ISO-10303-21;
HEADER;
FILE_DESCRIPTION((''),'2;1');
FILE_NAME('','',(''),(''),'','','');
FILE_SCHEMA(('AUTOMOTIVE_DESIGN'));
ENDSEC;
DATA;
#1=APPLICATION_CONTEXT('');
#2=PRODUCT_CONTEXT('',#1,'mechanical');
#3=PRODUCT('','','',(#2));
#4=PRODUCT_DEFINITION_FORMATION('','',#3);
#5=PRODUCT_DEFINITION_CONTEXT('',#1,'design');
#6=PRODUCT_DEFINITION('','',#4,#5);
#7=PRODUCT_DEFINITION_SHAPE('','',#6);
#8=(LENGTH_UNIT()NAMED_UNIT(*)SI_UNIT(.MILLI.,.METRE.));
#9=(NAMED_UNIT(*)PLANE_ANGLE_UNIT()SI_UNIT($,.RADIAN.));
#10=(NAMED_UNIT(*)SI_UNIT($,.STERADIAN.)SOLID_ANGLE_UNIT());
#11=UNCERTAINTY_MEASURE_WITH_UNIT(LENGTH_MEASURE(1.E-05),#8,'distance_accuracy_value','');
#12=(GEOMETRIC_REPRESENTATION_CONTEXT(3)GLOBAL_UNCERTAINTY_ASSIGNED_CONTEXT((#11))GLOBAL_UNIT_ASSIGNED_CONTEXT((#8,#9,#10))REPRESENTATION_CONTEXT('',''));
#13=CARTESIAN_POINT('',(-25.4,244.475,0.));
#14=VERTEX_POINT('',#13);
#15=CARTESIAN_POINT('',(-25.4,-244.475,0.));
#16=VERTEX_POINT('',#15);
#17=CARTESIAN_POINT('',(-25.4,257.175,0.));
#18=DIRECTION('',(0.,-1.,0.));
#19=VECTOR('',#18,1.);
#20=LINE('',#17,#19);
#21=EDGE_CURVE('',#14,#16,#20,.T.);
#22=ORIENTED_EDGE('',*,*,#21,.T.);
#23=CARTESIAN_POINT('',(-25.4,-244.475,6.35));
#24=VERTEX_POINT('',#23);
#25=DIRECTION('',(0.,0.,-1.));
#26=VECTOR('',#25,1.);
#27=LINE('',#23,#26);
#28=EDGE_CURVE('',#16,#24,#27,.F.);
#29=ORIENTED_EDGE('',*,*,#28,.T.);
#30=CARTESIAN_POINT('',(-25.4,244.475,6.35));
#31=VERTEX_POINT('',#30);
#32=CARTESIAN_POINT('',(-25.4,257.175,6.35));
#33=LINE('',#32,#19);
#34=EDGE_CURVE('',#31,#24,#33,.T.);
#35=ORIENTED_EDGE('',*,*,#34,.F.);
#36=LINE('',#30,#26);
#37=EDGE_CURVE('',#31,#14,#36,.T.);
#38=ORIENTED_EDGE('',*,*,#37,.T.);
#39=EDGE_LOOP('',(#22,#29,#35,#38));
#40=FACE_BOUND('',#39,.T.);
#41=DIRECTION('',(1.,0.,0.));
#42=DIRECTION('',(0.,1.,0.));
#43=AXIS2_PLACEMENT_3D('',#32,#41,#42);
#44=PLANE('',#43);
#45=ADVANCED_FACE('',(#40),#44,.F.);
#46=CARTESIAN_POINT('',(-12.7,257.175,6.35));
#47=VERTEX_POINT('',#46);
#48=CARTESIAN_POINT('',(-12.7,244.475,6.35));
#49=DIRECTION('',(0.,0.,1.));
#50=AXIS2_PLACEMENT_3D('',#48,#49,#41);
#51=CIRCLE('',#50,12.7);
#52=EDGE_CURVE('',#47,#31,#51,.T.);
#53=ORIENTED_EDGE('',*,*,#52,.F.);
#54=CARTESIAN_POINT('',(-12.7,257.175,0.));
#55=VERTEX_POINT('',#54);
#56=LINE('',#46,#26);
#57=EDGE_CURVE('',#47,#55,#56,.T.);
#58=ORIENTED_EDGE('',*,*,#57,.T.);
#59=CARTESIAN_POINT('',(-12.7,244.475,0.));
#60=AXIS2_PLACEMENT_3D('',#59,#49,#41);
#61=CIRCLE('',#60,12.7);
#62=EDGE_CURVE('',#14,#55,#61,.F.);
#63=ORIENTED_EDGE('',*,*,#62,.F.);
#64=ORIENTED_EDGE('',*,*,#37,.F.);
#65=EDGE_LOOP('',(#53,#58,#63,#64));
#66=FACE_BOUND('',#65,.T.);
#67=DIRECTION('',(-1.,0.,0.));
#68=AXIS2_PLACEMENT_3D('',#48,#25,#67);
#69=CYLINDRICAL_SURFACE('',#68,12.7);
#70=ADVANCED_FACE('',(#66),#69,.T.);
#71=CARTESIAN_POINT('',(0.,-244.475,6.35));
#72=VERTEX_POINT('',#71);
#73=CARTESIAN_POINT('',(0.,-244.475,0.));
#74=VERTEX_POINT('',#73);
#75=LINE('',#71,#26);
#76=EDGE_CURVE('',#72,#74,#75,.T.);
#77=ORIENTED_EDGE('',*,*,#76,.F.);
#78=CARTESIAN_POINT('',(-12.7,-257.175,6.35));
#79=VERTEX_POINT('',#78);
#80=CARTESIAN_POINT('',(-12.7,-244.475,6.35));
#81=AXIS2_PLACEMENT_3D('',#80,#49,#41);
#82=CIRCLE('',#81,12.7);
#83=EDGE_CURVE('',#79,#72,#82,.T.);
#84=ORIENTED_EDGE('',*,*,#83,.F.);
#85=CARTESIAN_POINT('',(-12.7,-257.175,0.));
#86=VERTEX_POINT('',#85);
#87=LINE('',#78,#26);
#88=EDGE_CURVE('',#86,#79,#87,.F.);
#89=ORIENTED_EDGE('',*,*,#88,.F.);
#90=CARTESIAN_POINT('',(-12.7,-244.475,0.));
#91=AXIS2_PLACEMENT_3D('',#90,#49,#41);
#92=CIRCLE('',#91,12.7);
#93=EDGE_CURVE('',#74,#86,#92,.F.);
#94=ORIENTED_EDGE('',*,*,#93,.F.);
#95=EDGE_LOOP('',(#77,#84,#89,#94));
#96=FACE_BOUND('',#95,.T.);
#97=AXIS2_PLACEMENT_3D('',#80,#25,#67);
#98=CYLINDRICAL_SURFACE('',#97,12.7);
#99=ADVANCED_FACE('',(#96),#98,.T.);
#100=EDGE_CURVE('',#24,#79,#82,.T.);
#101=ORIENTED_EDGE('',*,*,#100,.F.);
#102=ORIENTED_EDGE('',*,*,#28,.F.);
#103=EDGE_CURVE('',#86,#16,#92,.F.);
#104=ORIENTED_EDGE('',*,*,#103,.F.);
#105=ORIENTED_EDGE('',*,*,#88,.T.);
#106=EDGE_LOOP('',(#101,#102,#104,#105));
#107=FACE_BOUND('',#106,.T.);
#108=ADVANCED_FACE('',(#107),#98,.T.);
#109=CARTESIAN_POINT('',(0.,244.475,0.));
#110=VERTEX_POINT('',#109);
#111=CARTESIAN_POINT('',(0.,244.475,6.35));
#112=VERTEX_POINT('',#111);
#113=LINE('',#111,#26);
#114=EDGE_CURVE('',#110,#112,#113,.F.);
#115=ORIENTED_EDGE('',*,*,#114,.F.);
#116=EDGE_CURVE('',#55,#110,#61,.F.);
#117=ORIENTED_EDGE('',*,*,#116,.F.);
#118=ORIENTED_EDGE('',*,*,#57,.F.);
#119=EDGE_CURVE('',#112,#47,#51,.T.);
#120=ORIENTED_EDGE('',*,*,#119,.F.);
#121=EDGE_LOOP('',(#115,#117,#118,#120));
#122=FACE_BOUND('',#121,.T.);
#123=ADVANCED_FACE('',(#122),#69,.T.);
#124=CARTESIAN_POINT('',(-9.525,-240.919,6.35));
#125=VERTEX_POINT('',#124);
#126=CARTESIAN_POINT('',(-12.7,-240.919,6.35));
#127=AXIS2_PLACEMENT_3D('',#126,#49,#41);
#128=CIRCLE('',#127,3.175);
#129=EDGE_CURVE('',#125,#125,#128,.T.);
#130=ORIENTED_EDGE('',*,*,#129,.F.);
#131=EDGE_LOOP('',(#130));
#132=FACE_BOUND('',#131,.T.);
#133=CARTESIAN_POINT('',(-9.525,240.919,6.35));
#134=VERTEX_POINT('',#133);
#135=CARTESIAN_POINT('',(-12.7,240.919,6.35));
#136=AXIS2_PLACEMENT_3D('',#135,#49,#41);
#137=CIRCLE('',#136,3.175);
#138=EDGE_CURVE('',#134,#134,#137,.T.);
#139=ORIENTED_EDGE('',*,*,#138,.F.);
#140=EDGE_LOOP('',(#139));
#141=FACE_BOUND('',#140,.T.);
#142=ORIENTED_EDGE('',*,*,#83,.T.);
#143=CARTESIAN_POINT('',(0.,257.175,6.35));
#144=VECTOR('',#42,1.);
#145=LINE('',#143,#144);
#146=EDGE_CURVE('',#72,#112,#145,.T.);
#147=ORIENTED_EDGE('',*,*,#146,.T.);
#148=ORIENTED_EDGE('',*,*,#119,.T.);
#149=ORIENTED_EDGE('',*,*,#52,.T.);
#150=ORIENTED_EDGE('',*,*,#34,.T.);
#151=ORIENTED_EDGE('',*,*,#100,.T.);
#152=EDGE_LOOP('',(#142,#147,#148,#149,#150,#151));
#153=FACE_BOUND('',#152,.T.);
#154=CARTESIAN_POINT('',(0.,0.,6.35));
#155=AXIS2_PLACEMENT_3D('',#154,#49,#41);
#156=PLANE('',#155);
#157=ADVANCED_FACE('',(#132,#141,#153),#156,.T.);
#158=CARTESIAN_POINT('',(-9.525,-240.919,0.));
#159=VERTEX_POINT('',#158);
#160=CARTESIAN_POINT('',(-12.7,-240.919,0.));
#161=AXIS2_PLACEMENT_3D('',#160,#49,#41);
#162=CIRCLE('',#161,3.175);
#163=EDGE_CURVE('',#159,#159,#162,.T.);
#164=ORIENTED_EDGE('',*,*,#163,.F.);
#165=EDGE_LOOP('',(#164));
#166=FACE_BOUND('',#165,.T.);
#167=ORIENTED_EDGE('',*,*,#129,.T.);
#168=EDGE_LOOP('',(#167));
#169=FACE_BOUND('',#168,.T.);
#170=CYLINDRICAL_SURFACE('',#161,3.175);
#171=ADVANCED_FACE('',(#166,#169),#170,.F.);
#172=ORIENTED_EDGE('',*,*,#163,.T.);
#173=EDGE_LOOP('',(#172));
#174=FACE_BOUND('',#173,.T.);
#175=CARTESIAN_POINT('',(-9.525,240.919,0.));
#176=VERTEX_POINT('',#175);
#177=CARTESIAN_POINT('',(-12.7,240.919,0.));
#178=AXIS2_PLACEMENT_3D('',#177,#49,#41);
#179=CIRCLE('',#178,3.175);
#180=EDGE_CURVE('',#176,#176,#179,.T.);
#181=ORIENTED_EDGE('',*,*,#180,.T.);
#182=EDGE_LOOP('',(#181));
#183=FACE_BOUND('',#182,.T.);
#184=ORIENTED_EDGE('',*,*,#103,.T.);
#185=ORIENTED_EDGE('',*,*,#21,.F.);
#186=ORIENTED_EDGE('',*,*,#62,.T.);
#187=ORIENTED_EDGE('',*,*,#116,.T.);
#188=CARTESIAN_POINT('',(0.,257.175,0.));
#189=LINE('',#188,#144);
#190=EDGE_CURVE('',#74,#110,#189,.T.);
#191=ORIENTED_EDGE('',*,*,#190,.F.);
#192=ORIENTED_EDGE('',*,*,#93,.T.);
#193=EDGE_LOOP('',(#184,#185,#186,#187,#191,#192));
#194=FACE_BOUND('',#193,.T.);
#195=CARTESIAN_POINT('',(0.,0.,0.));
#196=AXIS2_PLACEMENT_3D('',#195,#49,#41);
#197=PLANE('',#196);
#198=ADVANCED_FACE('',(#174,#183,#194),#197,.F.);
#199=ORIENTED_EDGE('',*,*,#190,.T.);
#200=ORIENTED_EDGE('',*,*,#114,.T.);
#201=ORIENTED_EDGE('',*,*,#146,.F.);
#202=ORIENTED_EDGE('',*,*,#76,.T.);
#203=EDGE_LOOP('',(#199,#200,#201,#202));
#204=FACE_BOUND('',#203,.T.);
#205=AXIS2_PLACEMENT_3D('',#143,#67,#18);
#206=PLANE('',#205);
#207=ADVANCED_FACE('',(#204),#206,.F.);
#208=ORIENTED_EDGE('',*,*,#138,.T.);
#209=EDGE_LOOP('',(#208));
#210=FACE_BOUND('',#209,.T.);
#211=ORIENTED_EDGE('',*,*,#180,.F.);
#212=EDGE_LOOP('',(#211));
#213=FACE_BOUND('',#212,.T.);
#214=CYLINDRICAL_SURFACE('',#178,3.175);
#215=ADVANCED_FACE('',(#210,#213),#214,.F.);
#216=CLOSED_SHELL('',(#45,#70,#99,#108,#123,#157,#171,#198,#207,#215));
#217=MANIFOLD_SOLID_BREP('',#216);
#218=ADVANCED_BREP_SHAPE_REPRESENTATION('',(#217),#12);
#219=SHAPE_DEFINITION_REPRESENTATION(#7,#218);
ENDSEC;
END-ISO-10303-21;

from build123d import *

# Parameters (mm, degrees)
SKETCH1_W           = 25.4
SKETCH1_H           = 514.35
BOSS_EXTRUDE1_DEPTH = 6.35
FILLET1_R           = 12.7
FILLET2_R           = 12.7
SKETCH2_R           = 3.175
CUT_EXTRUDE1_DEPTH  = 259.504280671


with BuildPart() as part:
    # Sketch1 → Boss-Extrude1 (new body)
    with BuildSketch(Plane.XY):
        with Locations((-12.7, 0)):
            Rectangle(SKETCH1_W, SKETCH1_H)
    extrude(amount=BOSS_EXTRUDE1_DEPTH)

    # Fillet1
    fillet1_edges = [part.edges().sort_by_distance(p)[0] for p in [
        (-25.4, 257.175, 3.175),
        (0, 257.175, 3.175),
    ]]
    fillet(fillet1_edges, radius=FILLET1_R - 0.0001)  # a hair under: the kernel refuses the full size

    # Fillet2
    fillet2_edges = [part.edges().sort_by_distance(p)[0] for p in [
        (-25.4, -257.175, 3.175),
        (0, -257.175, 3.175),
    ]]
    fillet(fillet2_edges, radius=FILLET2_R - 0.0001)  # a hair under: the kernel refuses the full size

    # Sketch2 → Cut-Extrude1 (cut, through all)
    with BuildSketch(Plane.XY.offset(6.35)):
        with Locations((-12.7, 240.919)):
            Circle(SKETCH2_R)
        with Locations((-12.7, -240.919)):
            Circle(SKETCH2_R)
    extrude(amount=-CUT_EXTRUDE1_DEPTH, mode=Mode.SUBTRACT)


solid = part.part
